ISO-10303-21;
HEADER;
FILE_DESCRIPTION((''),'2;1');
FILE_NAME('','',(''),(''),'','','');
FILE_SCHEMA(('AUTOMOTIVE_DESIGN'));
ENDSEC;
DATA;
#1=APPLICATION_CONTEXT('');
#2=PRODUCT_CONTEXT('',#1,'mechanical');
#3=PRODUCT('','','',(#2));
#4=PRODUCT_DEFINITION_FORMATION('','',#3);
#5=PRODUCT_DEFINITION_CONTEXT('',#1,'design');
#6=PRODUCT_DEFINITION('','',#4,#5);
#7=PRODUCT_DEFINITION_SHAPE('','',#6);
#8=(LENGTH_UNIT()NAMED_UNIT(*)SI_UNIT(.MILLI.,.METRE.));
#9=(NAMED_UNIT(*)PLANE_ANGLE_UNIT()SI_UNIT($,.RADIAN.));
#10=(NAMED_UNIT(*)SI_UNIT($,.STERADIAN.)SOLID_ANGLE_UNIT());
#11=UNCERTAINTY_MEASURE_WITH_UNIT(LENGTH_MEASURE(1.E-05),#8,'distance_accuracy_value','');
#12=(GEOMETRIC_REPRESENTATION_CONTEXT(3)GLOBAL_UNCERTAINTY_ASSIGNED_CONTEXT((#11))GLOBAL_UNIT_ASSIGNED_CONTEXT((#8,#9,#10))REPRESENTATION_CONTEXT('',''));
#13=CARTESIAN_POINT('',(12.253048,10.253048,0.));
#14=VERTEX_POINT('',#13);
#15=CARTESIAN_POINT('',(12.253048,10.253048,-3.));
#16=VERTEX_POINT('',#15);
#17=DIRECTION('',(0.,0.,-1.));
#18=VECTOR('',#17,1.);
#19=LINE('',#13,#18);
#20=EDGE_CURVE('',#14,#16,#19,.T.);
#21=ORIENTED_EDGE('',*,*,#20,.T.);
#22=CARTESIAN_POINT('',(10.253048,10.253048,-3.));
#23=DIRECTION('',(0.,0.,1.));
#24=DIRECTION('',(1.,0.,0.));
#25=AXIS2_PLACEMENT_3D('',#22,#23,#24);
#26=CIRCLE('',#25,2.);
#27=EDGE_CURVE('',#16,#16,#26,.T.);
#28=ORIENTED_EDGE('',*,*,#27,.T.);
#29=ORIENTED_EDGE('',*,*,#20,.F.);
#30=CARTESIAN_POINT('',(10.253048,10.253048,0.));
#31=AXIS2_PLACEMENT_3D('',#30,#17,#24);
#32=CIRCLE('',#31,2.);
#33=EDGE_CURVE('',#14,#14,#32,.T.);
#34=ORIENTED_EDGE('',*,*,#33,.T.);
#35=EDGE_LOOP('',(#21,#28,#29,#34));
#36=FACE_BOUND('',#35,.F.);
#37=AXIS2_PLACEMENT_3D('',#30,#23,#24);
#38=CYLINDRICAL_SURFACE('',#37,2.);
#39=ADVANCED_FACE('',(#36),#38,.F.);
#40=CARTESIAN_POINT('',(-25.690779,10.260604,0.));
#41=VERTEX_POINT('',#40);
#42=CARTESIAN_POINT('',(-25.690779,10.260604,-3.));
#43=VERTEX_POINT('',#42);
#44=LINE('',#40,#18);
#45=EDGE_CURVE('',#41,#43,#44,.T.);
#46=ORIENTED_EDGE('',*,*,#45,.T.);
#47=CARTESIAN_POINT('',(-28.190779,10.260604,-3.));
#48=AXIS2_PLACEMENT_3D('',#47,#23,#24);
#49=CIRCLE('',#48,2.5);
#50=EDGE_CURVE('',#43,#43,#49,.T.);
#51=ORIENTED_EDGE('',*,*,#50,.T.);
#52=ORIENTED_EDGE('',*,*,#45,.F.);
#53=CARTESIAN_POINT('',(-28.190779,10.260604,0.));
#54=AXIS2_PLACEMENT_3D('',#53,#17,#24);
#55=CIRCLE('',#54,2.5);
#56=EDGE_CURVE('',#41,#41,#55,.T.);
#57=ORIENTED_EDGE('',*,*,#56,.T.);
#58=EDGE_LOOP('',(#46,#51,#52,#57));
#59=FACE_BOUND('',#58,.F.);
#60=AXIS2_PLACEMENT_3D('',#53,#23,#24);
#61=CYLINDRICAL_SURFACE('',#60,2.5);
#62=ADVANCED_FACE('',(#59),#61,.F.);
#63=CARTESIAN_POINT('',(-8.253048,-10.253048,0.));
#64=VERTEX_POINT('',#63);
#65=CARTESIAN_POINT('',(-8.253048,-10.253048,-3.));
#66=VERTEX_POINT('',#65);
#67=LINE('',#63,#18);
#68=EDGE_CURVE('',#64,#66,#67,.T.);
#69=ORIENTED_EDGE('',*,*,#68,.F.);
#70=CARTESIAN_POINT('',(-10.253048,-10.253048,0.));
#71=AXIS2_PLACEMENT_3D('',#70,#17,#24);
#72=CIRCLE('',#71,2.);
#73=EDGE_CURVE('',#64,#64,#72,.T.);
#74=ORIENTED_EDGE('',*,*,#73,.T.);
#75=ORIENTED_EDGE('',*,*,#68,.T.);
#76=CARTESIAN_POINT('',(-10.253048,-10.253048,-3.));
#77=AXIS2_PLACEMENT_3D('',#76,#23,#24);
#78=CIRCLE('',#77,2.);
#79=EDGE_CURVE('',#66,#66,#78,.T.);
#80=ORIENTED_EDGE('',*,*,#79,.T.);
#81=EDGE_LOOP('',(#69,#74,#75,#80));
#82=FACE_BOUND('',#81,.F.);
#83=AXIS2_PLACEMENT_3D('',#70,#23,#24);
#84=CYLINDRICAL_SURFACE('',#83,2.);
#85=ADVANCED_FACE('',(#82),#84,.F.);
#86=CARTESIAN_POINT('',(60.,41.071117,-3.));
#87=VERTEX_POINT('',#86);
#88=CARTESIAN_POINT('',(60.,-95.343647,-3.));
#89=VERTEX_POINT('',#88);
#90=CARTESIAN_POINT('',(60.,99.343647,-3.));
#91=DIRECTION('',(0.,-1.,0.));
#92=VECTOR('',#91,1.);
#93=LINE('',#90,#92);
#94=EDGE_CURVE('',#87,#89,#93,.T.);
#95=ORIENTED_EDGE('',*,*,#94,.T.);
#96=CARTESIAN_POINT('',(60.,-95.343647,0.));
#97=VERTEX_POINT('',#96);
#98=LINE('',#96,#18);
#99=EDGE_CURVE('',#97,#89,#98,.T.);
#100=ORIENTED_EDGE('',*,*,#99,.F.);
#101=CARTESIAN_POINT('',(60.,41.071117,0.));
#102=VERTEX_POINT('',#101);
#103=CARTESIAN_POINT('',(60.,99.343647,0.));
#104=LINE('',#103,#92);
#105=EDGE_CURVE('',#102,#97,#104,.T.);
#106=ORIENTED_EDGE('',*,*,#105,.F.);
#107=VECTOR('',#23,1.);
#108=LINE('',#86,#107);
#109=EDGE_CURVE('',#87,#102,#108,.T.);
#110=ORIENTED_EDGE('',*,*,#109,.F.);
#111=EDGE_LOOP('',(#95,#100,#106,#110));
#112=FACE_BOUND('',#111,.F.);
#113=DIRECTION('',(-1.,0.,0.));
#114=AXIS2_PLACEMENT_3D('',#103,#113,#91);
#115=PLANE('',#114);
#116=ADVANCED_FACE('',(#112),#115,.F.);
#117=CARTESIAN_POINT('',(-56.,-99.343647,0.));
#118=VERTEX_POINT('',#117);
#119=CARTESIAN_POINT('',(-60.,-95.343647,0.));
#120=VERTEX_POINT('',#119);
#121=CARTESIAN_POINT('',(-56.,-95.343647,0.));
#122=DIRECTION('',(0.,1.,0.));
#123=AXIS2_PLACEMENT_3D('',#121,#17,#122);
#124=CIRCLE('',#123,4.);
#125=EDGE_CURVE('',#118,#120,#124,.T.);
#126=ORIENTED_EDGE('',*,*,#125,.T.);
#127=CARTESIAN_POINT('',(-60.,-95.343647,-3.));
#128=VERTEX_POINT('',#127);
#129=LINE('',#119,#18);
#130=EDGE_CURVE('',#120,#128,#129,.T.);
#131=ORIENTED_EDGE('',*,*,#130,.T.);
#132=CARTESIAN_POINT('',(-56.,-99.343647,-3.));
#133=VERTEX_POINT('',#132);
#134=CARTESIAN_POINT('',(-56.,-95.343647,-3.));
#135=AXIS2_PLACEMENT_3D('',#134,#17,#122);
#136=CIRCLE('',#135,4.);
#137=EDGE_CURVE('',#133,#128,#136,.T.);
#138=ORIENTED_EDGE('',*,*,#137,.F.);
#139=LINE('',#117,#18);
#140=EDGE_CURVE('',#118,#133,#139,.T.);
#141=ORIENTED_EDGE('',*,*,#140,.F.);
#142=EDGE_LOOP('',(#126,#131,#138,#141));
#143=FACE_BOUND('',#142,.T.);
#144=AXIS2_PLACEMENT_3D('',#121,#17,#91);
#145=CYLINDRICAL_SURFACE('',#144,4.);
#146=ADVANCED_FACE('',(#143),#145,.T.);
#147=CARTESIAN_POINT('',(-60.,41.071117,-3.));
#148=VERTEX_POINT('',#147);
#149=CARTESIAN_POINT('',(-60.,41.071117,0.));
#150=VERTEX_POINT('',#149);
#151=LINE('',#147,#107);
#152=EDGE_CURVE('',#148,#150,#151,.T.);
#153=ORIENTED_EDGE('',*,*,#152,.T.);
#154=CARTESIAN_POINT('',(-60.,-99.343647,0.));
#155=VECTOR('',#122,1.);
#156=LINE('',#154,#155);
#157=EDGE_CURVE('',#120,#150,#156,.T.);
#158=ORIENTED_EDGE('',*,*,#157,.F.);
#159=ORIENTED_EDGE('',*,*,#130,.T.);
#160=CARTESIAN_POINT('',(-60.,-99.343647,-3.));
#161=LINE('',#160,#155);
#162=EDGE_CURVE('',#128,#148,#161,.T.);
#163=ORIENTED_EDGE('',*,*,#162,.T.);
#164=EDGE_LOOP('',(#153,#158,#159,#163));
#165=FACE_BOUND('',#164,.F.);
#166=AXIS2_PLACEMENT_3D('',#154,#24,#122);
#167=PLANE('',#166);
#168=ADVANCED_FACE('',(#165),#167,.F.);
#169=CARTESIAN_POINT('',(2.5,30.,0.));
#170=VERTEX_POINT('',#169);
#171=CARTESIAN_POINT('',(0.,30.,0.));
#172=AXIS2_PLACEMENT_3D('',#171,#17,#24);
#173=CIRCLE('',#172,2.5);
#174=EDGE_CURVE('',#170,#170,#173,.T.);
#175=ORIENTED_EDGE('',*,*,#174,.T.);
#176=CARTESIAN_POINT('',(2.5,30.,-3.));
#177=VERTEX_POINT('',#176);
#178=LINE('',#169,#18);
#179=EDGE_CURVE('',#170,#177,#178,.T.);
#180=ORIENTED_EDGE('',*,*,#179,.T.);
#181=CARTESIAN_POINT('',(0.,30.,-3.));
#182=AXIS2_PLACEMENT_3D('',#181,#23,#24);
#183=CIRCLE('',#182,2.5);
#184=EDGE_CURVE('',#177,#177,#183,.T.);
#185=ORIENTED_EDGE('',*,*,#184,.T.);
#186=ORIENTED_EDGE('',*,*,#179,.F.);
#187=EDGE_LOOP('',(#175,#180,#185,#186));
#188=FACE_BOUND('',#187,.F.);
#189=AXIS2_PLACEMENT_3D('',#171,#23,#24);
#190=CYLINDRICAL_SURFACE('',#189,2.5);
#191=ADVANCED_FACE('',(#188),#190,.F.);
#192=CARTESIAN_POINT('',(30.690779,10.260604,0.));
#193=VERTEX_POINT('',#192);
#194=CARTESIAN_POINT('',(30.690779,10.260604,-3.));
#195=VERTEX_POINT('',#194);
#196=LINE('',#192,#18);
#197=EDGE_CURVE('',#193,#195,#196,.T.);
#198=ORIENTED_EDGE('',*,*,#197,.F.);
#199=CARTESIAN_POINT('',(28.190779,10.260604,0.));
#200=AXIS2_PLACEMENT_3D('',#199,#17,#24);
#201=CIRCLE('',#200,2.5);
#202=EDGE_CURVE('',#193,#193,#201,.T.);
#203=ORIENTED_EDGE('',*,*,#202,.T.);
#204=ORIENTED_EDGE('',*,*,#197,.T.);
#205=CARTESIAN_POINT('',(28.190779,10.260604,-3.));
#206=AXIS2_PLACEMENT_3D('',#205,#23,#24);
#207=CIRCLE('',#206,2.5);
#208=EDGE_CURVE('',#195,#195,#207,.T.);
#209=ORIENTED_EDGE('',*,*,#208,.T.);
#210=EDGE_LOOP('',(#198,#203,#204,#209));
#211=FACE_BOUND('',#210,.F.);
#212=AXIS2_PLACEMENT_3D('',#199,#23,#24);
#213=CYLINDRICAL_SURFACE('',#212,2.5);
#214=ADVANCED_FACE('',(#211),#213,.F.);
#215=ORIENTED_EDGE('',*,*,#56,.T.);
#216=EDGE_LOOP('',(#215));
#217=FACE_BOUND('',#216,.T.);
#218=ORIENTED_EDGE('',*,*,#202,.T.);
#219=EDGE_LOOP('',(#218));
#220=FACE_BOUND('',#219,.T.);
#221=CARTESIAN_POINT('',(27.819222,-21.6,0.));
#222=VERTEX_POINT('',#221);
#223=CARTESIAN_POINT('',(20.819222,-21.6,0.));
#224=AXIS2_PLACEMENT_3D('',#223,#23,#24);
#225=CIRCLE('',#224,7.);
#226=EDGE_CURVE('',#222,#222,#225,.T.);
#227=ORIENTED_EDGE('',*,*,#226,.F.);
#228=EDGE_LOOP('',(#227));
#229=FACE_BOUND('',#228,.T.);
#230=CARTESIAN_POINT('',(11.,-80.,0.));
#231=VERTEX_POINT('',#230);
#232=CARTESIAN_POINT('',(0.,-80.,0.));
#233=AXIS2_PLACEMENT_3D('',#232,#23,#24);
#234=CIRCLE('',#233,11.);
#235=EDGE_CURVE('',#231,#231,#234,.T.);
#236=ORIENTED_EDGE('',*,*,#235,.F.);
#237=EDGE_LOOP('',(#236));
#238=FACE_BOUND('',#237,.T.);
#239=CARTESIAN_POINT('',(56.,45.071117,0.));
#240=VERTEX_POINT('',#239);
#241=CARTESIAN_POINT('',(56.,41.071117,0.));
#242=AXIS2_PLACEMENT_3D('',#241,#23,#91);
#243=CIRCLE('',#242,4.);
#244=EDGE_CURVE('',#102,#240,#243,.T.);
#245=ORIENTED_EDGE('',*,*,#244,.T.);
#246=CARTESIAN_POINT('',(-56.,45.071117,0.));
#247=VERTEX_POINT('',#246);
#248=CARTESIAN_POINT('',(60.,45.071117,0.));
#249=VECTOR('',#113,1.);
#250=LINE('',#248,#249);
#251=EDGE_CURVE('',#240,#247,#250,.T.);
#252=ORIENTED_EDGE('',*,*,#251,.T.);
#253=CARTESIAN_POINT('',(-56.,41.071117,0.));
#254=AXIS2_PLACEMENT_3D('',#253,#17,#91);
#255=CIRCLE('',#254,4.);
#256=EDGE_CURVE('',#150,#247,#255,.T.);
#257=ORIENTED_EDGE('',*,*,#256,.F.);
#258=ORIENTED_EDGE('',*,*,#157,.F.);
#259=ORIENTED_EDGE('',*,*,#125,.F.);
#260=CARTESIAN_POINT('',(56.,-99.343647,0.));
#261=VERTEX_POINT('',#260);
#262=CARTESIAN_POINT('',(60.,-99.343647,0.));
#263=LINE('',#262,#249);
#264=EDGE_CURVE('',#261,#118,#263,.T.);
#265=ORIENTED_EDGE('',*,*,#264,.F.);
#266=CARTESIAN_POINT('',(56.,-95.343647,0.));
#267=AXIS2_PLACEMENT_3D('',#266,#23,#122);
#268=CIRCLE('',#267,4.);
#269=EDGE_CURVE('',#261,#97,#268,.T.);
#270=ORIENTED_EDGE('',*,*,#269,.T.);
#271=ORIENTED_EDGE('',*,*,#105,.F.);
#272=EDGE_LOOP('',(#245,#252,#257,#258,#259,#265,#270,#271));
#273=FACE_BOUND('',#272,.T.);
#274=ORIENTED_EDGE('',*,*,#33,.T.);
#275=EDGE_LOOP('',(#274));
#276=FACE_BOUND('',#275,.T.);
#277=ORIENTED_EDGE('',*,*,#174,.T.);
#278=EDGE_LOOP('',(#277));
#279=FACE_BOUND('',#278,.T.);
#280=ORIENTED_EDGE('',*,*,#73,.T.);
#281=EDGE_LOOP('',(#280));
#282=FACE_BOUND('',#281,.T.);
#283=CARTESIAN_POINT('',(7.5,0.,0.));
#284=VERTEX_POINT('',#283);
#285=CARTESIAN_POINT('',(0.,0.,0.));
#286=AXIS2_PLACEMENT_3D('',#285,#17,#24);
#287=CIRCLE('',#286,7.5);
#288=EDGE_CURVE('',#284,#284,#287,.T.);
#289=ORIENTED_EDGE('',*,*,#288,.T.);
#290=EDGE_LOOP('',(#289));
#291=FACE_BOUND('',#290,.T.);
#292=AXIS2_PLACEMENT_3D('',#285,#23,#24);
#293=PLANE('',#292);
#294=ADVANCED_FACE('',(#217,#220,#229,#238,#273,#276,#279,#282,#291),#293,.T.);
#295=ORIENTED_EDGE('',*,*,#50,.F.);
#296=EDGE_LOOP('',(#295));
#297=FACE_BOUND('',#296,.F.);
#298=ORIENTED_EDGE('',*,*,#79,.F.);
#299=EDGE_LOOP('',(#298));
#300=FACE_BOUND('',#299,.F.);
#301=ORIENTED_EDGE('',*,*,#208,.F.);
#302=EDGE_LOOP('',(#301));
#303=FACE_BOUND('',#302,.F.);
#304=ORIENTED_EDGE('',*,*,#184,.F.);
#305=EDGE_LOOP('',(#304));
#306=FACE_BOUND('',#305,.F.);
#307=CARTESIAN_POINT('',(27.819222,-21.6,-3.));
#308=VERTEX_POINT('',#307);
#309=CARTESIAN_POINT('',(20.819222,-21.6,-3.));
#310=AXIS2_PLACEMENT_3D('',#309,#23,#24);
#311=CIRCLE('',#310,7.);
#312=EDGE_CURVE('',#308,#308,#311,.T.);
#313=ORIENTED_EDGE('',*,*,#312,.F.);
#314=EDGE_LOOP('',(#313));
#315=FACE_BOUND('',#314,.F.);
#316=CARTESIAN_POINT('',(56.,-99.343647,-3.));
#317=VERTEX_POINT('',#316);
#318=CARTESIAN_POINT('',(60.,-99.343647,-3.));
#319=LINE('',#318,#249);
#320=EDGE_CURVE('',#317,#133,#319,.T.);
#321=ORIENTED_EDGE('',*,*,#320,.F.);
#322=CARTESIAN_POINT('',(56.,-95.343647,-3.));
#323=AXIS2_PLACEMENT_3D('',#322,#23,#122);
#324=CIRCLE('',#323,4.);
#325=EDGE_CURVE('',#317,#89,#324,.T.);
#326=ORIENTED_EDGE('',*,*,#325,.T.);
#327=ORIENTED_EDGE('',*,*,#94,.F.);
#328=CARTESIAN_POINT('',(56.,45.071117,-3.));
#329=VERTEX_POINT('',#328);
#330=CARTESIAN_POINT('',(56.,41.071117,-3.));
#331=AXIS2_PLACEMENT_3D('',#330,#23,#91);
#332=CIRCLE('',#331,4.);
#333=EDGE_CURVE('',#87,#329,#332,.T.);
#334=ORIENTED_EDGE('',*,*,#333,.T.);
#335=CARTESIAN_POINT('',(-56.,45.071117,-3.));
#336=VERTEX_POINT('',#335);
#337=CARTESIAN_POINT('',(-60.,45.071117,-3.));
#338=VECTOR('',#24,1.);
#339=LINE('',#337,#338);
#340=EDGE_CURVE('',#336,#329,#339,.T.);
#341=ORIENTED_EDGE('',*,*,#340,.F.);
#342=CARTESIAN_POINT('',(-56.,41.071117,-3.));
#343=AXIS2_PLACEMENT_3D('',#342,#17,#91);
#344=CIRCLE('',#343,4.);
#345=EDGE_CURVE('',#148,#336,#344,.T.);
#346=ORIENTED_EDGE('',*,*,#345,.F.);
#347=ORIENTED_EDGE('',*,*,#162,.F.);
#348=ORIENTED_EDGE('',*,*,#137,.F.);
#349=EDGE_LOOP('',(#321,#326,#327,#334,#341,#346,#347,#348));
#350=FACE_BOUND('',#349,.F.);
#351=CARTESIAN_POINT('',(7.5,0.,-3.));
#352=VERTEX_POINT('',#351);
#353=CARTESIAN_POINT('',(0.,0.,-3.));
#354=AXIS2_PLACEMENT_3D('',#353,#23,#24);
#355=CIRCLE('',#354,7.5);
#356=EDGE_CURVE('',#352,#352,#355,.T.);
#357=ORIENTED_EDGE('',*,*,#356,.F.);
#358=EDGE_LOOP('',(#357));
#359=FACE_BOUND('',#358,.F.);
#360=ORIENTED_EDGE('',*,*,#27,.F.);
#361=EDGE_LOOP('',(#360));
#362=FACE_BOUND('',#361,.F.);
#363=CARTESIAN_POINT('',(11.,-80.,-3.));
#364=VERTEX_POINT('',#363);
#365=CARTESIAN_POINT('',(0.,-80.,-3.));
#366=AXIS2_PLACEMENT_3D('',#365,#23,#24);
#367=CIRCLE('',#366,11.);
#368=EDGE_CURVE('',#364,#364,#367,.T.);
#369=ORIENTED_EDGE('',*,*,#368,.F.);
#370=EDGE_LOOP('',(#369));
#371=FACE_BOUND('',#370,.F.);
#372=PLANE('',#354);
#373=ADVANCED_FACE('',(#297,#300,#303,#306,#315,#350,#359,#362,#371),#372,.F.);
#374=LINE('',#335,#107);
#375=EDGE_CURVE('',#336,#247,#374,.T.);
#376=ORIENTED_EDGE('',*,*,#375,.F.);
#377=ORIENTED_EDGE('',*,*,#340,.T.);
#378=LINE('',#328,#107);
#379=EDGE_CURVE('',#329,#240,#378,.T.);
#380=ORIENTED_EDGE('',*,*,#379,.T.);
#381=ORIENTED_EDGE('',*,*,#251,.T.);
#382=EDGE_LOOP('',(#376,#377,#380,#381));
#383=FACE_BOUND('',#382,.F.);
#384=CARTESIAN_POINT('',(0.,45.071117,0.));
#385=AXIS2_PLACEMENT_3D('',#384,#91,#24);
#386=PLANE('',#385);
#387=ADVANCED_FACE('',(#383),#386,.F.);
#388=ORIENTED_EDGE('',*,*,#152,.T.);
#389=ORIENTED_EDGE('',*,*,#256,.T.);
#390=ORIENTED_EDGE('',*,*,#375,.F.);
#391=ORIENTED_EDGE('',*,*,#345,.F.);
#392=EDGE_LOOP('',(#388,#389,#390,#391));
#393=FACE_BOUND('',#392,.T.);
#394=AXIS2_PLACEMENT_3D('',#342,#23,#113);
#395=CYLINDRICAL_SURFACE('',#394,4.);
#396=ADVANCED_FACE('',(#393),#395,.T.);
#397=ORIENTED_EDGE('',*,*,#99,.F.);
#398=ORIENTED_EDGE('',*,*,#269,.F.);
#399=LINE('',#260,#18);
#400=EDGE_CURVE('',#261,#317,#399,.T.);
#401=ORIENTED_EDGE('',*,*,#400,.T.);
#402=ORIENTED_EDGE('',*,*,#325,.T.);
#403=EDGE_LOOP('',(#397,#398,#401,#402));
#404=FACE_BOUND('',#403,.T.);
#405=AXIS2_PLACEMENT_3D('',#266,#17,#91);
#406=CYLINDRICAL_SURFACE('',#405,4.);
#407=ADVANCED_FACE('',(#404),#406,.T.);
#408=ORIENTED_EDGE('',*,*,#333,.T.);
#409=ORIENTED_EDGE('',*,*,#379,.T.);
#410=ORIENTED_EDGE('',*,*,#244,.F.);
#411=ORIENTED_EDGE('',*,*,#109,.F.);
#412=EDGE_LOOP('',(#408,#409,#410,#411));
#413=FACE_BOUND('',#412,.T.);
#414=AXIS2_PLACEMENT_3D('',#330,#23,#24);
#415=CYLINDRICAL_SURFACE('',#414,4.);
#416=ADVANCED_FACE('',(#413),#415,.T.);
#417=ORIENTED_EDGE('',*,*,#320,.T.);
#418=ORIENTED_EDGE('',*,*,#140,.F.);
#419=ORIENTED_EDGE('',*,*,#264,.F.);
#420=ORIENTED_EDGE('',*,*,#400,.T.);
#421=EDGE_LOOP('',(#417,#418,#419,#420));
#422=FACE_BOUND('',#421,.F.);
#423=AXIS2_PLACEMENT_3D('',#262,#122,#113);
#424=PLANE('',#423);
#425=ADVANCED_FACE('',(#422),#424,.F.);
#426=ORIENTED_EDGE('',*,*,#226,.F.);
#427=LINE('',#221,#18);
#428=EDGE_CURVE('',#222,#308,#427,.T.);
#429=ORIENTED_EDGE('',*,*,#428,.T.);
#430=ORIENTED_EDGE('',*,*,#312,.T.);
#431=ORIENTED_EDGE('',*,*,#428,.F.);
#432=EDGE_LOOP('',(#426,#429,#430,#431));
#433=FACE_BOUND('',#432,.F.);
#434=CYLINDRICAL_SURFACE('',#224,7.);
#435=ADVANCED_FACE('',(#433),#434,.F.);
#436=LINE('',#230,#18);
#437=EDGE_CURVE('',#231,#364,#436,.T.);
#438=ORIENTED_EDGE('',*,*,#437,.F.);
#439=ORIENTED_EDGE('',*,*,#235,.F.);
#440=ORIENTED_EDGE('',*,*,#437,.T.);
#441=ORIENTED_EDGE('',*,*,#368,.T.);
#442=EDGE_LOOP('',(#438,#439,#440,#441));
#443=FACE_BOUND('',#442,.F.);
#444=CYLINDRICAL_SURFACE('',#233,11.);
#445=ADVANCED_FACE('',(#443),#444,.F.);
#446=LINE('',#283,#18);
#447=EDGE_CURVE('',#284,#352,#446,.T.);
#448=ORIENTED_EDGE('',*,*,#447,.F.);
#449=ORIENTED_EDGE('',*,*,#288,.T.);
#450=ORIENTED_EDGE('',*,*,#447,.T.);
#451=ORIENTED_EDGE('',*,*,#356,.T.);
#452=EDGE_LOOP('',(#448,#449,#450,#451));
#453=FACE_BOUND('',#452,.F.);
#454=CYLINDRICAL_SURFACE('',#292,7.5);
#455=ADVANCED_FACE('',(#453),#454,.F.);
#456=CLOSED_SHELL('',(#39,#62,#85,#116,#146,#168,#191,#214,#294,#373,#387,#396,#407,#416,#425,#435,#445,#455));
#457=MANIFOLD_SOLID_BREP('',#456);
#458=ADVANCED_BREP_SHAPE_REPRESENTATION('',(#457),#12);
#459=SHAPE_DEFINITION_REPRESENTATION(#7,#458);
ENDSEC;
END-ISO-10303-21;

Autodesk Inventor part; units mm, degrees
ref_plane "YZ Plane" through (0, 0, 0) normal (1, 0, 0) x (0, 1, 0)
ref_plane "XZ Plane" through (0, 0, 0) normal (0, 1, 0) x (-1, 0, 0)
ref_plane "XY Plane" through (0, 0, 0) normal (0, 0, 1) x (1, 0, 0)
sketch "スケッチ1" plane through (0, 0, 0) normal (0, 0, 1) x (1, 0, 0)
  circle A0 centre (0, 0) radius 21.2
  circle A1 centre (0, 0) radius 7.5
  circle A2 centre (0, 0) radius 30
  circle A3 centre (20.819222, -21.6) radius 22.5
  circle A4 centre (20.819222, -21.6) radius 14
  circle A5 centre (20.819222, -21.6) radius 62
  circle A6 centre (0, -80) radius 48
  circle A7 centre (0, -80) radius 50
  circle A8 centre (20.819222, -21.6) radius 4
  circle A9 centre (0, -80) radius 5
  dimension "d2" = 60
  dimension "d4" = 124
  dimension "d0" = 42.4
  dimension "d1" = 15
  dimension "d3" = 28
  dimension "d5" = 100
  dimension "d23" = 8
  dimension "d24" = 10
sketch "スケッチ2" plane through (0, 0, 0) normal (0, 0, 1) x (1, 0, 0)
  line L0 (0, 0) -> (24.501973, 0) construction
  line L1 (0, 0) -> (12.5, 0) construction
  line L2 (0, 0) -> (10.253048, 10.253048)
  line L3 (0, 0) -> (14.5, 0) construction
  line L4 (10.253048, 10.253048) -> (-10.253048, -10.253048)
  circle A0 centre (10.253048, 10.253048) radius 2
  circle A1 centre (-10.253048, -10.253048) radius 2
  circle A2 centre (0, 0) radius 7.5
  line L5 (0, 0) -> (28.190779, 10.260604)
  line L6 (0, 0) -> (30, 0) construction
  line L7 (0, 0) -> (-28.190779, 10.260604)
  line L8 (0, 0) -> (30, 0) construction
  circle A3 centre (-28.190779, 10.260604) radius 2.5
  line L9 (0, 0) -> (0, 30)
  circle A4 centre (0, 30) radius 2.5
  circle A5 centre (28.190779, 10.260604) radius 2.5
  dimension "d9" = 14.5
  dimension "d10" = 45
  dimension "d11" = 29
  dimension "d12" = 4
  dimension "d13" = 4
  dimension "d14" = 15
  dimension "d15" = 30
  dimension "d16" = 20
  dimension "d17" = 30
  dimension "d18" = 160
  dimension "d19" = 5
  dimension "d20" = 30
  dimension "d21" = 5
  dimension "d22" = 5
sketch "スケッチ3" plane through (0, 0, 0) normal (0, 0, 1) x (1, 0, 0)
  line L0 (60, -99.343647) -> (-60, -99.343647)
  line L1 (-60, -99.343647) -> (-60, 99.343647)
  line L2 (-60, 99.343647) -> (60, 99.343647)
  line L3 (60, 99.343647) -> (60, -99.343647)
  line L4 (60, -99.343647) -> (-60, 99.343647) construction
  line L5 (-60, -99.343647) -> (60, 99.343647) construction
  point P0 (0, 0)
  dimension "d25" = 120
extrude "押し出し1" add sketch "スケッチ3" against normal blind 3
extrude "押し出し2" cut sketch "スケッチ2" against normal blind 3
extrude "押し出し3" cut sketch "スケッチ1" against normal blind 3 contours A8 A2 | A2 A8 | A9 A5 | A5 A9
sketch "スケッチ4" plane through (0, 0, 0) normal (0, 0, 1) x (1, 0, 0)
  line L0 (0, 45.071117) -> (68.359536, 45.071117)
  line L1 (68.359536, 45.071117) -> (-74.382402, 45.071117)
  line L2 (-74.382402, 45.071117) -> (108.165644, 45.071117)
  line L3 (108.165644, 45.071117) -> (108.165644, 129.415375)
  line L4 (108.165644, 129.415375) -> (-74.382402, 129.415375)
  line L5 (-74.382402, 129.415375) -> (-74.382402, 45.071117)
  point P0 (0, 0)
extrude "押し出し4" cut sketch "スケッチ4" against normal blind 10
fillet "フィレット1" radius 4 4 edges at (-60, 45.0711, -1.5) (60, 45.0711, -1.5) (-60, -99.3436, -1.5) (60, -99.3436, -1.5)
sketch "スケッチ5" plane through (0, 0, 0) normal (0, 0, 1) x (1, 0, 0)
  circle A0 centre (0, -80) radius 5 projected
  circle A1 centre (0, -80) radius 11
  point P0 (0, 0)
  dimension "d35" = 22
extrude "押し出し5" cut sketch "スケッチ5" against normal blind 10
sketch "スケッチ6" plane through (0, 0, 0) normal (0, 0, 1) x (1, 0, 0)
  circle A0 centre (20.819222, -21.6) radius 4
  circle A1 centre (20.819222, -21.6) radius 7
  point P0 (0, 0)
  dimension "d38" = 14
extrude "押し出し6" cut sketch "スケッチ6" against normal through all
properties part number "板"
